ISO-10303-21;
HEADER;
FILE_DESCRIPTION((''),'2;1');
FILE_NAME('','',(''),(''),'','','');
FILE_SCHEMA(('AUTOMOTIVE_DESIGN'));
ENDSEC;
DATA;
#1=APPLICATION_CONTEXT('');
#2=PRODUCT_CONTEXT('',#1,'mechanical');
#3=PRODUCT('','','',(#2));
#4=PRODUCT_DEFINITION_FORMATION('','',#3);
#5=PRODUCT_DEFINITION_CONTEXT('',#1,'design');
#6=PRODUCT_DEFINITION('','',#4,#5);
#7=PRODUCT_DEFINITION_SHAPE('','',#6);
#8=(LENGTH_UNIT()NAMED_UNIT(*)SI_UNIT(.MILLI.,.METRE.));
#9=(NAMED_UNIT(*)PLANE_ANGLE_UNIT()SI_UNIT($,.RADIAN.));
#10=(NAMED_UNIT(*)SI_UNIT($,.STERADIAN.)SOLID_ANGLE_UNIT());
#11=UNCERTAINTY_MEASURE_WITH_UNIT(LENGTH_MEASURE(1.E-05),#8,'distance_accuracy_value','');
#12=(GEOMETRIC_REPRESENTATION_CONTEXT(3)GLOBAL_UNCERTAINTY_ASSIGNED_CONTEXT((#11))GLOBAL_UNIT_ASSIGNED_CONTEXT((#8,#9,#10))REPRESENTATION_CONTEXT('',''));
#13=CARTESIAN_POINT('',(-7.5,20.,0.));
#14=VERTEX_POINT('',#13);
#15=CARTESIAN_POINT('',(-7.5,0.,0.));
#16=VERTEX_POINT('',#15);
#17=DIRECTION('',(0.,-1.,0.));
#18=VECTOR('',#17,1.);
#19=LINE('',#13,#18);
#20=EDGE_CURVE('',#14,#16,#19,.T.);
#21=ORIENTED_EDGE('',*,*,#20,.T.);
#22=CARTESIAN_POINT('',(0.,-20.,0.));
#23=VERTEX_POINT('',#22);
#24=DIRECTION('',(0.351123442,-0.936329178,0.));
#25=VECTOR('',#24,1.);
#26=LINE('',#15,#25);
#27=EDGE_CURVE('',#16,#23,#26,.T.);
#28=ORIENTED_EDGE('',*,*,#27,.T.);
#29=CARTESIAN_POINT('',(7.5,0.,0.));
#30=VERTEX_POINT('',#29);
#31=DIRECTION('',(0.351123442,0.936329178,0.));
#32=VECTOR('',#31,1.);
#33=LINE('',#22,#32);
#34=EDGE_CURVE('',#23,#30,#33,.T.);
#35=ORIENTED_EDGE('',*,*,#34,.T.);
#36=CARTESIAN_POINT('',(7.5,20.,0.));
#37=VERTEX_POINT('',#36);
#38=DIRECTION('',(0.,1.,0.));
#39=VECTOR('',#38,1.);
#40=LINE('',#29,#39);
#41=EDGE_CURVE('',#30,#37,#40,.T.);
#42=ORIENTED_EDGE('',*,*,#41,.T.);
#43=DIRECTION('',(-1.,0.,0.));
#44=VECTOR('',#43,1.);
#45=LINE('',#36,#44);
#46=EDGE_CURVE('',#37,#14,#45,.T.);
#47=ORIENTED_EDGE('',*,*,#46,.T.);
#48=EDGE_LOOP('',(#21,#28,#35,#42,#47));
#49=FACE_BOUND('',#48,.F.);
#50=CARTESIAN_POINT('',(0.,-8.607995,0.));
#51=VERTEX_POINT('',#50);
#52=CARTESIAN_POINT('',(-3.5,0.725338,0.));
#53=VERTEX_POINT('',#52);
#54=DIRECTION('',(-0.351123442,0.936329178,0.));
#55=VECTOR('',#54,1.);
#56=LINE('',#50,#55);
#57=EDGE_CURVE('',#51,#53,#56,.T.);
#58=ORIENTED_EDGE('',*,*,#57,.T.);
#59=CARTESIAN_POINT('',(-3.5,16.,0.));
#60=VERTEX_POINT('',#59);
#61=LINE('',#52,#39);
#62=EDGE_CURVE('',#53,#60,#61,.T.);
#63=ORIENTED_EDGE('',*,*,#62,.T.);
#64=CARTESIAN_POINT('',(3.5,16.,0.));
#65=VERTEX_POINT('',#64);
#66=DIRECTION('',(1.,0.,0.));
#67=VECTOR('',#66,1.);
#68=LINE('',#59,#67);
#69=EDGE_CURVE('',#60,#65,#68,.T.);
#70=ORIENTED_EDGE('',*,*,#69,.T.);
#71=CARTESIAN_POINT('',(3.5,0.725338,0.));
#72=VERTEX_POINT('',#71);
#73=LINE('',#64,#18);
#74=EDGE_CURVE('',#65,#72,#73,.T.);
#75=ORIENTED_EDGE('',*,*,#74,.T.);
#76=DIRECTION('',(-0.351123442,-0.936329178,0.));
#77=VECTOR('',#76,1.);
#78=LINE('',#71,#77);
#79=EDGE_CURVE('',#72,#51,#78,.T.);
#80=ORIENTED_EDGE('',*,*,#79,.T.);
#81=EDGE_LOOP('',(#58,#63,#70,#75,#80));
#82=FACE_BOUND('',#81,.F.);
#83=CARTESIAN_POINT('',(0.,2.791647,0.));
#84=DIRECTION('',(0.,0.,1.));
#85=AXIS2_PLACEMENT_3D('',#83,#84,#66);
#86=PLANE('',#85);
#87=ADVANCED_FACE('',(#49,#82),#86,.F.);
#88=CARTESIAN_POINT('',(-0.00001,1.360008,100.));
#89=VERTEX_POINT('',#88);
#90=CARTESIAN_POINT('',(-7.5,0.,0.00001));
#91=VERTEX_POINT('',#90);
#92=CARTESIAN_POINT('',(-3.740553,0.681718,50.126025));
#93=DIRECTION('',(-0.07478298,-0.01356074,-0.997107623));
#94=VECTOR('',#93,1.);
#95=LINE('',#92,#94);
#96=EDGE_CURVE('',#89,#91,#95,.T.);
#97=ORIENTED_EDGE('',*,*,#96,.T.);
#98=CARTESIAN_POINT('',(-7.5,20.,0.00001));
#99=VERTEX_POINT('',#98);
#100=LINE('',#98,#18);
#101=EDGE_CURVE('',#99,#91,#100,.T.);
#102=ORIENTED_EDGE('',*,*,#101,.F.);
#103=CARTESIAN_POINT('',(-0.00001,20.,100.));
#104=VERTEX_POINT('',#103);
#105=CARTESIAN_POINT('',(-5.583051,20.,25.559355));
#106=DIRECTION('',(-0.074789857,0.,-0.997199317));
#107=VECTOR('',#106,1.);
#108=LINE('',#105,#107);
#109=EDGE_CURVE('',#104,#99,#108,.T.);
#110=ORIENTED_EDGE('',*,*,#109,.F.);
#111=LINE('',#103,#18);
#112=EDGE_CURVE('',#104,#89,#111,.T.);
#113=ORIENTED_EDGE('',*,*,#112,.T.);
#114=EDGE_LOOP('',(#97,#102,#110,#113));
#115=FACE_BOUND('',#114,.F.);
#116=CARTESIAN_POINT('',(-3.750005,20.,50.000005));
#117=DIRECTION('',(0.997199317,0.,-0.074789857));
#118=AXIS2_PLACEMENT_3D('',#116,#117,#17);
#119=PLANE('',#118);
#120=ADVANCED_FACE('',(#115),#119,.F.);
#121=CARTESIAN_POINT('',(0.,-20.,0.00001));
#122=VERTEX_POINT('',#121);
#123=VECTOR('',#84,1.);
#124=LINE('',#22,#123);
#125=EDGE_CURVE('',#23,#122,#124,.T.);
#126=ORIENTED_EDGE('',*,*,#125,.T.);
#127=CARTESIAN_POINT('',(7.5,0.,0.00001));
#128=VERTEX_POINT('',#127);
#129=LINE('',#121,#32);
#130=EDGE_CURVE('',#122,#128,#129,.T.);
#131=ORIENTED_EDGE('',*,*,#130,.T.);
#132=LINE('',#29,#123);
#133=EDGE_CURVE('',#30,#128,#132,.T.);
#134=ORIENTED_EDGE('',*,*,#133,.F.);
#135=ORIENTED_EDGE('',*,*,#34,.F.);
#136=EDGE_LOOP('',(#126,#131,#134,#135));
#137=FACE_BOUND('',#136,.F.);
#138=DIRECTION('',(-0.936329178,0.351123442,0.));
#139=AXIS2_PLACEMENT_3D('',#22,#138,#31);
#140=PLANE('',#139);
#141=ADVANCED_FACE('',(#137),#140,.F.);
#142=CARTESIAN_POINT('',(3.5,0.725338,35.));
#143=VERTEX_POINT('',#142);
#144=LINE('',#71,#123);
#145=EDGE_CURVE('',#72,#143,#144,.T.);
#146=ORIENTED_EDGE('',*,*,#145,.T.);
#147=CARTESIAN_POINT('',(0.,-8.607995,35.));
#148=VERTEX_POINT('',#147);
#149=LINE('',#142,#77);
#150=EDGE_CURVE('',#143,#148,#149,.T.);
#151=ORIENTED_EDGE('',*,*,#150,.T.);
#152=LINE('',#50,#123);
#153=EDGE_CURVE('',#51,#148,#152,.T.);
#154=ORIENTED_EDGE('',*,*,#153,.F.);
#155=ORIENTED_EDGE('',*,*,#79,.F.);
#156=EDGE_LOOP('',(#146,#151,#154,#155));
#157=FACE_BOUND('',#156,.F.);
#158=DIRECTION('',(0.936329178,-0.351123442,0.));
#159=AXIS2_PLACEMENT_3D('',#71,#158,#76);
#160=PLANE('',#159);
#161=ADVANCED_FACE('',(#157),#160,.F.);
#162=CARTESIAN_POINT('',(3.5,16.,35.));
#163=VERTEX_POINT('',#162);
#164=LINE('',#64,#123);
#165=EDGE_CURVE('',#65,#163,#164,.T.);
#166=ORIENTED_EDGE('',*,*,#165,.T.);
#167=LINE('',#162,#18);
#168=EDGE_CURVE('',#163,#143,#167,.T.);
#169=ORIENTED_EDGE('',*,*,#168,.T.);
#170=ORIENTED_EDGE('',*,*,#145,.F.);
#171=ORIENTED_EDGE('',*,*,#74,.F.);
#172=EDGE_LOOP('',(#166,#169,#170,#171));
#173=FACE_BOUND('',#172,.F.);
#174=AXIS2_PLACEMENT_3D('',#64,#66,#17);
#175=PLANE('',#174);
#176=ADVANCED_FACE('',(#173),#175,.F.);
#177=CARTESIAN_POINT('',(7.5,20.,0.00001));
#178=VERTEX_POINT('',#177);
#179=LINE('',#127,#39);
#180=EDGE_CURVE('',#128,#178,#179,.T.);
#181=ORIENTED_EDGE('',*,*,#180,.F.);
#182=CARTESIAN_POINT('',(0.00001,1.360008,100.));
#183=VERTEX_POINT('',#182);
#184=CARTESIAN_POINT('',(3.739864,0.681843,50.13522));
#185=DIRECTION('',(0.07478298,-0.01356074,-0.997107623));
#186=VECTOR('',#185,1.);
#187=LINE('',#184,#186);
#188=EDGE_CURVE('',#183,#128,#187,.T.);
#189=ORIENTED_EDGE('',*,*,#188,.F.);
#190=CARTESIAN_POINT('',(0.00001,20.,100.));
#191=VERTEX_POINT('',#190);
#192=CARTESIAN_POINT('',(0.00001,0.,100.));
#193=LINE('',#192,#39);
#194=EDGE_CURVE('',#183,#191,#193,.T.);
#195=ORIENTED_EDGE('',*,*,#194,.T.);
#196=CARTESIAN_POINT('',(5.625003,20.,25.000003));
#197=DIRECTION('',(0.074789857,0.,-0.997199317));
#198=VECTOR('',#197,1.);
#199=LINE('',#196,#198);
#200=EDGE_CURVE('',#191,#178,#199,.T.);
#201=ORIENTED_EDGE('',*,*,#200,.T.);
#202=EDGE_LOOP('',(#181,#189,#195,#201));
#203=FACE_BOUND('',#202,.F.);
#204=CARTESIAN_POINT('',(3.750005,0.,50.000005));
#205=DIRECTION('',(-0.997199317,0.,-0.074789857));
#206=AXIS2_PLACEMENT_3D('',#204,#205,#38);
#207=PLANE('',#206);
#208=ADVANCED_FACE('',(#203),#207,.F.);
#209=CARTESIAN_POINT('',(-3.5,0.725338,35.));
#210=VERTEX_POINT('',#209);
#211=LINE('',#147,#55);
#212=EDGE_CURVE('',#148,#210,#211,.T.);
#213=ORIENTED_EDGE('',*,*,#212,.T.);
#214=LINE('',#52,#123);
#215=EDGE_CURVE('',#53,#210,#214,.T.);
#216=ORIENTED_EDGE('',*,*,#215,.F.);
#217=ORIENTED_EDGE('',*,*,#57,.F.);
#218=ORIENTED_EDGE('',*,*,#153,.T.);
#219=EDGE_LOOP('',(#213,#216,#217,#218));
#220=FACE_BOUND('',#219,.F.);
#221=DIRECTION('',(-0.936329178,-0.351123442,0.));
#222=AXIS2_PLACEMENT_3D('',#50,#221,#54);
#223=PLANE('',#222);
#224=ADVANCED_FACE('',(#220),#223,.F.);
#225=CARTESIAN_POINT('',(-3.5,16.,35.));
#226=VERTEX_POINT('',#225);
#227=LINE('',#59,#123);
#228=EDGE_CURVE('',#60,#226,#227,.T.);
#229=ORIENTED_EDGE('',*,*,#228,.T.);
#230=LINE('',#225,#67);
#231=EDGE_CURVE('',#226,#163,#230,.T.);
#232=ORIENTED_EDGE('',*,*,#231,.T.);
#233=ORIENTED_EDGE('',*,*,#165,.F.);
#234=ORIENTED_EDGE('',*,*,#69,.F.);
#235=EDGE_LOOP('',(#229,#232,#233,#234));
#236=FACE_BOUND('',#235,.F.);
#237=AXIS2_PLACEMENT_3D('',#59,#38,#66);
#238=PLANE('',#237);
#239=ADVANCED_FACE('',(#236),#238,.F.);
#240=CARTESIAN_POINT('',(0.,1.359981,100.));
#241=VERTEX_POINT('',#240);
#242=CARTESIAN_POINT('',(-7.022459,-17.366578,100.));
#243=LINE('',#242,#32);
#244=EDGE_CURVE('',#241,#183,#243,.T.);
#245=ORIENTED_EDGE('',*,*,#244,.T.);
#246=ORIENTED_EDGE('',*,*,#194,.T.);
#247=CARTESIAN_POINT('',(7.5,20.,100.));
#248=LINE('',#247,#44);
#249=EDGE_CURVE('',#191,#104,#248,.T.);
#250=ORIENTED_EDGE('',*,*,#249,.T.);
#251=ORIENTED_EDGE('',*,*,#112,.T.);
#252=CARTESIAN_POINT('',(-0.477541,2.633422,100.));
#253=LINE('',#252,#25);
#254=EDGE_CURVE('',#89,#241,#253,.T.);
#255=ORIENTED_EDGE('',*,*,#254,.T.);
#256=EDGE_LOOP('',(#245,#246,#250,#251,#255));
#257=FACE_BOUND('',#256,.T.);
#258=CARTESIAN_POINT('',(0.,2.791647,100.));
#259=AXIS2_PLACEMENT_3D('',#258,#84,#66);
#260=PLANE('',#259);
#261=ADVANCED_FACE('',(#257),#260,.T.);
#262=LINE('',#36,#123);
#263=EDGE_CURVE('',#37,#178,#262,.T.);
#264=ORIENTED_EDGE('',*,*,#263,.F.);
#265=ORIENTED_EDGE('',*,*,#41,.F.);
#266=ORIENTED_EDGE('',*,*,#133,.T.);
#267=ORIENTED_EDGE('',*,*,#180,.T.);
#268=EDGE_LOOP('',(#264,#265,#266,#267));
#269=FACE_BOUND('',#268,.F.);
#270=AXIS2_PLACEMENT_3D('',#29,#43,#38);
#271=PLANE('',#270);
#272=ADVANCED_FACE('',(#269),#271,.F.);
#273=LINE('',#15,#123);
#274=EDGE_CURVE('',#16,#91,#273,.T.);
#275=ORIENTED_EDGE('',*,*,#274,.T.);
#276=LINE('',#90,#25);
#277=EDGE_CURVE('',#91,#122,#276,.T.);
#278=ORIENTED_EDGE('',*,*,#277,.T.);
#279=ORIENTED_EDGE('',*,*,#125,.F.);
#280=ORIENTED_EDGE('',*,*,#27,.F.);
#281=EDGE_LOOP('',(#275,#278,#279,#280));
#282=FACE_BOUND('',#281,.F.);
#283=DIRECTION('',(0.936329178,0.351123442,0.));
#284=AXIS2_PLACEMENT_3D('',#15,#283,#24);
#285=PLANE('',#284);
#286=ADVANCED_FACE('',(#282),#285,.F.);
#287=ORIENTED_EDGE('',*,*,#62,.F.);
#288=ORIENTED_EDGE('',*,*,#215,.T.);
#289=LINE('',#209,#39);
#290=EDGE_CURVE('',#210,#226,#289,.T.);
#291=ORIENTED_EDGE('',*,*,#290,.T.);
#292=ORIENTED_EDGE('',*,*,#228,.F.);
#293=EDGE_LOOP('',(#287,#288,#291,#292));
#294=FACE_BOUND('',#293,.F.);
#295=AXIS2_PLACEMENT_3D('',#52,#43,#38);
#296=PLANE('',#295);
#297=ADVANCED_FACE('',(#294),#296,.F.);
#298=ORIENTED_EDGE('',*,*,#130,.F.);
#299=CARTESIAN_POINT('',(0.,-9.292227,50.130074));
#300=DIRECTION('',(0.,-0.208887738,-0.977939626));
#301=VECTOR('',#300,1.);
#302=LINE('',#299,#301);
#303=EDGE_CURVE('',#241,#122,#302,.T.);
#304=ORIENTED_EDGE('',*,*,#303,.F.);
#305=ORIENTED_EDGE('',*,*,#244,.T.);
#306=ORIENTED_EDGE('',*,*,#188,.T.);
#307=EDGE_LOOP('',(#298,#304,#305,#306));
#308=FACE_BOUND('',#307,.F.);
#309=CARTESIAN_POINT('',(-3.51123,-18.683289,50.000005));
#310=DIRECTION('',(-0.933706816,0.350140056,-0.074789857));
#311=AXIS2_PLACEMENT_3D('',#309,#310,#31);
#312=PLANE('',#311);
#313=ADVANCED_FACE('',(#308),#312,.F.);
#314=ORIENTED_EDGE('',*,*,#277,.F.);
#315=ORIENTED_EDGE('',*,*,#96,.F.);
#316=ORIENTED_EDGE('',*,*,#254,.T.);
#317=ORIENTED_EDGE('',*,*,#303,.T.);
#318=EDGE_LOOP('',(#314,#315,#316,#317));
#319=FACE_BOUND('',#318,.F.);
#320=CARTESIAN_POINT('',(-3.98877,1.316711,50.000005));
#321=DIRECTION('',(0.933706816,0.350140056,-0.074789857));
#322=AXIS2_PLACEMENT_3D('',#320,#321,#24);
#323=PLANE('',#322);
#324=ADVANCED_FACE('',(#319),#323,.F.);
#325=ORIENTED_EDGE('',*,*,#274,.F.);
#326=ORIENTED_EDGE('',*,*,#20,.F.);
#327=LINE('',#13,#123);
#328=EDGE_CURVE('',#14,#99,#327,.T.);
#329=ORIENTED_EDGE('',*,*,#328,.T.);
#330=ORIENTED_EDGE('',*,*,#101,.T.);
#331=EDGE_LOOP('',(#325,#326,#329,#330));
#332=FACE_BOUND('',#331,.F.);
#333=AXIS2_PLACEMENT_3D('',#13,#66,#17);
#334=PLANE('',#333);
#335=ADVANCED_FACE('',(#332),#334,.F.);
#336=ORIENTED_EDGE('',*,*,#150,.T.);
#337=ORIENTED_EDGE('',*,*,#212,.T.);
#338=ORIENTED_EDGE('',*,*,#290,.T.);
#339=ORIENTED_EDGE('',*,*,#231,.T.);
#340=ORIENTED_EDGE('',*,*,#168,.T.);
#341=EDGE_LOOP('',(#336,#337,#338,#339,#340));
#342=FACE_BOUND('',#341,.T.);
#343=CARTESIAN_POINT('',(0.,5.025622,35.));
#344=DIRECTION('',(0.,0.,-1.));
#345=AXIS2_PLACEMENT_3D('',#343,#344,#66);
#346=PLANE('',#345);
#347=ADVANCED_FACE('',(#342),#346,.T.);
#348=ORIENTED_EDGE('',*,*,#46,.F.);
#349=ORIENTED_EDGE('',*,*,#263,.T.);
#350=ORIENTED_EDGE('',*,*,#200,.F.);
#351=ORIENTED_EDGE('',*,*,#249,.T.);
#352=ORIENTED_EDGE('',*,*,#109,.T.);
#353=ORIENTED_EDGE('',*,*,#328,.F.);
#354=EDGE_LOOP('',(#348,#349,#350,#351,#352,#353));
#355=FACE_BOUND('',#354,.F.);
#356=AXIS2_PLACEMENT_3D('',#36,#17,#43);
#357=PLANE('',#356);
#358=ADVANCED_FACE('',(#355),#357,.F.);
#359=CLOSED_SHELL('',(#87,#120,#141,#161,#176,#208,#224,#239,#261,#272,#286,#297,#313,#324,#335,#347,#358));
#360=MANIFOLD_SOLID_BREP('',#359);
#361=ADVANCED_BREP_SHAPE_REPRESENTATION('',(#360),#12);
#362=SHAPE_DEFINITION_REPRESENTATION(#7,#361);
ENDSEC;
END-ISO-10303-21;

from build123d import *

# Parameters (mm, degrees)
F1_DEPTH = 100
F3_DEPTH = 35
F4_SIZE2 = 99.99999
F4_SIZE  = 7.49999


# Not quite as in the source:
# - a fillet or chamfer is up to 0.001 mm smaller than in the source, because OpenCascade refuses the exact size


with BuildPart() as f1:
    # F0 (on Top) → F1 (new body)
    with BuildSketch(Plane.XY):
        Polygon((-7.5, 20), (-7.5, 0), (0, -20), (7.5, 0), (7.5, 20), align=None)
    extrude(amount=F1_DEPTH)

    # F2 (on face) → F3 (cut)
    with BuildSketch(Plane(origin=(0, 0, 0), x_dir=(1, 0, 0), z_dir=(0, 0, -1))):
        Polygon((0, 8.6079950062), (-3.5, -0.7253383271), (-3.5, -16), (3.5, -16), (3.5, -0.7253383271), align=None)
    extrude(amount=-F3_DEPTH, mode=Mode.SUBTRACT)

    # F4 (size 7.5 and 100 in the source; OpenCascade refuses exactly that, so slightly less here)
    f4_edges = [f1.edges().sort_by_distance(p)[0] for p in [
        (3.75, -10, 100),
        (-3.75, -10, 100),
        (7.5, 10, 100),
        (-7.5, 10, 100),
    ]]
    f4_side = f1.faces().sort_by_distance((0, 4.444444, 100))[0]
    chamfer(f4_edges, length=F4_SIZE, length2=F4_SIZE2, reference=f4_side)


solid = f1.part
